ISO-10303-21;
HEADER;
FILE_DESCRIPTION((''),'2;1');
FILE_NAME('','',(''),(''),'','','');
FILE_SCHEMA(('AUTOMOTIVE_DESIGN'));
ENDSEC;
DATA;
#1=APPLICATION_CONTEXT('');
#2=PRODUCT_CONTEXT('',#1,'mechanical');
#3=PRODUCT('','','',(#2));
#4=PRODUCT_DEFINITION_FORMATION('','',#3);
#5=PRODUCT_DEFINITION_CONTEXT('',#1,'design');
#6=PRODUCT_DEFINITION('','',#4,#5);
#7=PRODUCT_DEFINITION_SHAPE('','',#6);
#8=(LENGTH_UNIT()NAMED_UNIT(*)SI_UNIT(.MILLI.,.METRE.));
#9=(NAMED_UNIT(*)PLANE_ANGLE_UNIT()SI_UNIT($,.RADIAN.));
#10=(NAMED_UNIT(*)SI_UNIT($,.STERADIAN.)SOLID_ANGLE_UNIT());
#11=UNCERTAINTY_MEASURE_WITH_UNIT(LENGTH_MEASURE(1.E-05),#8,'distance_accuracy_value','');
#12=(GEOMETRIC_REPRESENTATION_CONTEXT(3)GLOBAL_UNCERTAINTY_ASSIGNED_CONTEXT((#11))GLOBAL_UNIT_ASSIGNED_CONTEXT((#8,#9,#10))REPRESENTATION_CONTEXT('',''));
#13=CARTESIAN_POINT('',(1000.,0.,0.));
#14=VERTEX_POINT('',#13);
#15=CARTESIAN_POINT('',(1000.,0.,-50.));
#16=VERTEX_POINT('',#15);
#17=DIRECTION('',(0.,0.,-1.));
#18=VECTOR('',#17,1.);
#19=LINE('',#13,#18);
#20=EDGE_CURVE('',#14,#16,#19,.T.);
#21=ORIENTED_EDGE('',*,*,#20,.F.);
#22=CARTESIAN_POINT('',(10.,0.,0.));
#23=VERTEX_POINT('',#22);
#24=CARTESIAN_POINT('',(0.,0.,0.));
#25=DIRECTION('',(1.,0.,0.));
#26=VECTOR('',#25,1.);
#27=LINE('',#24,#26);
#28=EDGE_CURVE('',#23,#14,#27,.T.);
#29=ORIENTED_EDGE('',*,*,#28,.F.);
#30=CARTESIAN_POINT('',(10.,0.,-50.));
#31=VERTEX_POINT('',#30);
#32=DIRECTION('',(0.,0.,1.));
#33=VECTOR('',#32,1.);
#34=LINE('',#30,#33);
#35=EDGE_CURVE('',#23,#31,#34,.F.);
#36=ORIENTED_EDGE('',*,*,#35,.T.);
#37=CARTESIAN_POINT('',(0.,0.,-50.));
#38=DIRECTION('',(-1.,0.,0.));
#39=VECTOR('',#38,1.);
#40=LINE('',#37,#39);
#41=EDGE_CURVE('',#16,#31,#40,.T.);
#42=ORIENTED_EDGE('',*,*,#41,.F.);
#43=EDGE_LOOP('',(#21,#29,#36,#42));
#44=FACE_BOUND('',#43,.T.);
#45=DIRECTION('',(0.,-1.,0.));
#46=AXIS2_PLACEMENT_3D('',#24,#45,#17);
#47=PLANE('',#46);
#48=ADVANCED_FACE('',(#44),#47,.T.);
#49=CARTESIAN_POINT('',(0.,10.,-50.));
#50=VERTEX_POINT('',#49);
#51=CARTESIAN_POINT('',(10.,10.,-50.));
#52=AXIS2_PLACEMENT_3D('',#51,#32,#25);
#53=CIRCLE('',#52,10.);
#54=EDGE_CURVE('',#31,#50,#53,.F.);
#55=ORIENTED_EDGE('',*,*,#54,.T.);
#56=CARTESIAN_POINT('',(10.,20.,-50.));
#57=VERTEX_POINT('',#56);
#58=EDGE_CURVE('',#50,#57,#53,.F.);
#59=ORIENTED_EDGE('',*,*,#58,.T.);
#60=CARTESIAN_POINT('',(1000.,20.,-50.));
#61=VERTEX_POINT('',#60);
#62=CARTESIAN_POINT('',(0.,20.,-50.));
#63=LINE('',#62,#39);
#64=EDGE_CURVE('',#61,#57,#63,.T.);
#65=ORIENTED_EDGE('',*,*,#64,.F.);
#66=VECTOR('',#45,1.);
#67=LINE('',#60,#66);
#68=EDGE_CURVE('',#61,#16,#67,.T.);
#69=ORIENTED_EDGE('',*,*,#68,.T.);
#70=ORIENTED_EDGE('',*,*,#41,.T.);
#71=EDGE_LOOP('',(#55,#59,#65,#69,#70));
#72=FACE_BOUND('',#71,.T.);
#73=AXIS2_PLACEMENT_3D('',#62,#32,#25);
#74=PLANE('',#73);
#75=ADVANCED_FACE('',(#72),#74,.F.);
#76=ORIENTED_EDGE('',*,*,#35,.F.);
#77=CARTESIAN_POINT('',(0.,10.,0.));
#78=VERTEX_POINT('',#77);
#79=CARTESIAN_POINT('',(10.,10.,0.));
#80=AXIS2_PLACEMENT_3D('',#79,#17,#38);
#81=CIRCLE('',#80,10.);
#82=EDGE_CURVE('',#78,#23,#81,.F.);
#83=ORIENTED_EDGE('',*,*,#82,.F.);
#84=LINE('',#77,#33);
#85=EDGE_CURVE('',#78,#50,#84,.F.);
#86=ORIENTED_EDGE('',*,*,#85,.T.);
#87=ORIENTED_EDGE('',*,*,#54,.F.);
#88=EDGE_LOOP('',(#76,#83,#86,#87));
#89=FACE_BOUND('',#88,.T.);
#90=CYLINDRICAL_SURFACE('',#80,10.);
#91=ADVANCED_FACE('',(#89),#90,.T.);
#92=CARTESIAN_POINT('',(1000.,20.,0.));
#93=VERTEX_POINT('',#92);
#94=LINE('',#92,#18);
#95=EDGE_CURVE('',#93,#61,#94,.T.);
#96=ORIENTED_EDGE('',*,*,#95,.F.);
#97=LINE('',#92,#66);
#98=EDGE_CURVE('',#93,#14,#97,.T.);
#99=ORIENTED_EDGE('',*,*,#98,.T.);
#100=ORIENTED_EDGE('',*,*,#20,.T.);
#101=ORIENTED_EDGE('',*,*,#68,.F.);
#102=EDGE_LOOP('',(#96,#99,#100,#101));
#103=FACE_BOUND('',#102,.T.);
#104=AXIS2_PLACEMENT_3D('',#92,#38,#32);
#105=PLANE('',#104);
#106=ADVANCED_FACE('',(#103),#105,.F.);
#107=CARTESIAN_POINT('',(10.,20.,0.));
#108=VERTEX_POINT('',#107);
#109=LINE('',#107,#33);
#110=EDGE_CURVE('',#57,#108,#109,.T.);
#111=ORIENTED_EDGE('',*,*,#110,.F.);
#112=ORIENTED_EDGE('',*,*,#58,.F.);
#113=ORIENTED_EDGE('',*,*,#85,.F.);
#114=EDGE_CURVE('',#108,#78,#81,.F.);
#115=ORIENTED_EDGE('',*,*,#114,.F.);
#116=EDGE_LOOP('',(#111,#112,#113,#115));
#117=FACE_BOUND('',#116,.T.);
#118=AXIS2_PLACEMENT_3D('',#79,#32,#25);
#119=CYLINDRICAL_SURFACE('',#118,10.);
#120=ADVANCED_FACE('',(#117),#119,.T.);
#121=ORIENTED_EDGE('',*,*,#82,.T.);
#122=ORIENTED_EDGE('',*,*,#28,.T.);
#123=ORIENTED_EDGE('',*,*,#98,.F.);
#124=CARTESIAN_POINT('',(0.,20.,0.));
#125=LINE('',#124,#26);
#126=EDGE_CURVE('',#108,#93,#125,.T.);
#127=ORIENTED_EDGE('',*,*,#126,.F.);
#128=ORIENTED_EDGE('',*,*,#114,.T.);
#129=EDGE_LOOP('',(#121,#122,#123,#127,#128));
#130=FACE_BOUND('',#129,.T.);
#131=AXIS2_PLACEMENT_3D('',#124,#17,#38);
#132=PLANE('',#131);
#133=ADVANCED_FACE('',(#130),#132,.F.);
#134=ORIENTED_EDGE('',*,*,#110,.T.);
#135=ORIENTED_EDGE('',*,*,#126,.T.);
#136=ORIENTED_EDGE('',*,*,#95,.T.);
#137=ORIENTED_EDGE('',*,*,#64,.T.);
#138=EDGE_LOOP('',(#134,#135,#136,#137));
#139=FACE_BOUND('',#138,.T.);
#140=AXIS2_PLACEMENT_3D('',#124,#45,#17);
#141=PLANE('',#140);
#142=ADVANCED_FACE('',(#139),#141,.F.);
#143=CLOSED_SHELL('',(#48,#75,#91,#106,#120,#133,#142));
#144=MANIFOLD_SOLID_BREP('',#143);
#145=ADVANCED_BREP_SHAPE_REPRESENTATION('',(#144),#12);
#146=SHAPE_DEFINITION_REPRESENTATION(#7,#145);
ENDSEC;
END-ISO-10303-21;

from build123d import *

# Parameters (mm, degrees)
SKETCH1_W           = 1000
SKETCH1_H           = 50
BOSS_EXTRUDE1_DEPTH = 20
FILLET1_R           = 10


with BuildPart() as part:
    # Sketch1 → Boss-Extrude1 (new body)
    with BuildSketch(Plane(origin=(0, 0, 0), x_dir=(1, 0, 0), z_dir=(0, 1, 0))):
        with Locations((500, 25)):
            Rectangle(SKETCH1_W, SKETCH1_H)
    extrude(amount=BOSS_EXTRUDE1_DEPTH)

    # Fillet1
    fillet1_edges = [part.edges().sort_by_distance(p)[0] for p in [
        (0, 0, -25),
        (0, 20, -25),
    ]]
    fillet(fillet1_edges, radius=FILLET1_R - 0.0001)  # a hair under: the kernel refuses the full size


solid = part.part
